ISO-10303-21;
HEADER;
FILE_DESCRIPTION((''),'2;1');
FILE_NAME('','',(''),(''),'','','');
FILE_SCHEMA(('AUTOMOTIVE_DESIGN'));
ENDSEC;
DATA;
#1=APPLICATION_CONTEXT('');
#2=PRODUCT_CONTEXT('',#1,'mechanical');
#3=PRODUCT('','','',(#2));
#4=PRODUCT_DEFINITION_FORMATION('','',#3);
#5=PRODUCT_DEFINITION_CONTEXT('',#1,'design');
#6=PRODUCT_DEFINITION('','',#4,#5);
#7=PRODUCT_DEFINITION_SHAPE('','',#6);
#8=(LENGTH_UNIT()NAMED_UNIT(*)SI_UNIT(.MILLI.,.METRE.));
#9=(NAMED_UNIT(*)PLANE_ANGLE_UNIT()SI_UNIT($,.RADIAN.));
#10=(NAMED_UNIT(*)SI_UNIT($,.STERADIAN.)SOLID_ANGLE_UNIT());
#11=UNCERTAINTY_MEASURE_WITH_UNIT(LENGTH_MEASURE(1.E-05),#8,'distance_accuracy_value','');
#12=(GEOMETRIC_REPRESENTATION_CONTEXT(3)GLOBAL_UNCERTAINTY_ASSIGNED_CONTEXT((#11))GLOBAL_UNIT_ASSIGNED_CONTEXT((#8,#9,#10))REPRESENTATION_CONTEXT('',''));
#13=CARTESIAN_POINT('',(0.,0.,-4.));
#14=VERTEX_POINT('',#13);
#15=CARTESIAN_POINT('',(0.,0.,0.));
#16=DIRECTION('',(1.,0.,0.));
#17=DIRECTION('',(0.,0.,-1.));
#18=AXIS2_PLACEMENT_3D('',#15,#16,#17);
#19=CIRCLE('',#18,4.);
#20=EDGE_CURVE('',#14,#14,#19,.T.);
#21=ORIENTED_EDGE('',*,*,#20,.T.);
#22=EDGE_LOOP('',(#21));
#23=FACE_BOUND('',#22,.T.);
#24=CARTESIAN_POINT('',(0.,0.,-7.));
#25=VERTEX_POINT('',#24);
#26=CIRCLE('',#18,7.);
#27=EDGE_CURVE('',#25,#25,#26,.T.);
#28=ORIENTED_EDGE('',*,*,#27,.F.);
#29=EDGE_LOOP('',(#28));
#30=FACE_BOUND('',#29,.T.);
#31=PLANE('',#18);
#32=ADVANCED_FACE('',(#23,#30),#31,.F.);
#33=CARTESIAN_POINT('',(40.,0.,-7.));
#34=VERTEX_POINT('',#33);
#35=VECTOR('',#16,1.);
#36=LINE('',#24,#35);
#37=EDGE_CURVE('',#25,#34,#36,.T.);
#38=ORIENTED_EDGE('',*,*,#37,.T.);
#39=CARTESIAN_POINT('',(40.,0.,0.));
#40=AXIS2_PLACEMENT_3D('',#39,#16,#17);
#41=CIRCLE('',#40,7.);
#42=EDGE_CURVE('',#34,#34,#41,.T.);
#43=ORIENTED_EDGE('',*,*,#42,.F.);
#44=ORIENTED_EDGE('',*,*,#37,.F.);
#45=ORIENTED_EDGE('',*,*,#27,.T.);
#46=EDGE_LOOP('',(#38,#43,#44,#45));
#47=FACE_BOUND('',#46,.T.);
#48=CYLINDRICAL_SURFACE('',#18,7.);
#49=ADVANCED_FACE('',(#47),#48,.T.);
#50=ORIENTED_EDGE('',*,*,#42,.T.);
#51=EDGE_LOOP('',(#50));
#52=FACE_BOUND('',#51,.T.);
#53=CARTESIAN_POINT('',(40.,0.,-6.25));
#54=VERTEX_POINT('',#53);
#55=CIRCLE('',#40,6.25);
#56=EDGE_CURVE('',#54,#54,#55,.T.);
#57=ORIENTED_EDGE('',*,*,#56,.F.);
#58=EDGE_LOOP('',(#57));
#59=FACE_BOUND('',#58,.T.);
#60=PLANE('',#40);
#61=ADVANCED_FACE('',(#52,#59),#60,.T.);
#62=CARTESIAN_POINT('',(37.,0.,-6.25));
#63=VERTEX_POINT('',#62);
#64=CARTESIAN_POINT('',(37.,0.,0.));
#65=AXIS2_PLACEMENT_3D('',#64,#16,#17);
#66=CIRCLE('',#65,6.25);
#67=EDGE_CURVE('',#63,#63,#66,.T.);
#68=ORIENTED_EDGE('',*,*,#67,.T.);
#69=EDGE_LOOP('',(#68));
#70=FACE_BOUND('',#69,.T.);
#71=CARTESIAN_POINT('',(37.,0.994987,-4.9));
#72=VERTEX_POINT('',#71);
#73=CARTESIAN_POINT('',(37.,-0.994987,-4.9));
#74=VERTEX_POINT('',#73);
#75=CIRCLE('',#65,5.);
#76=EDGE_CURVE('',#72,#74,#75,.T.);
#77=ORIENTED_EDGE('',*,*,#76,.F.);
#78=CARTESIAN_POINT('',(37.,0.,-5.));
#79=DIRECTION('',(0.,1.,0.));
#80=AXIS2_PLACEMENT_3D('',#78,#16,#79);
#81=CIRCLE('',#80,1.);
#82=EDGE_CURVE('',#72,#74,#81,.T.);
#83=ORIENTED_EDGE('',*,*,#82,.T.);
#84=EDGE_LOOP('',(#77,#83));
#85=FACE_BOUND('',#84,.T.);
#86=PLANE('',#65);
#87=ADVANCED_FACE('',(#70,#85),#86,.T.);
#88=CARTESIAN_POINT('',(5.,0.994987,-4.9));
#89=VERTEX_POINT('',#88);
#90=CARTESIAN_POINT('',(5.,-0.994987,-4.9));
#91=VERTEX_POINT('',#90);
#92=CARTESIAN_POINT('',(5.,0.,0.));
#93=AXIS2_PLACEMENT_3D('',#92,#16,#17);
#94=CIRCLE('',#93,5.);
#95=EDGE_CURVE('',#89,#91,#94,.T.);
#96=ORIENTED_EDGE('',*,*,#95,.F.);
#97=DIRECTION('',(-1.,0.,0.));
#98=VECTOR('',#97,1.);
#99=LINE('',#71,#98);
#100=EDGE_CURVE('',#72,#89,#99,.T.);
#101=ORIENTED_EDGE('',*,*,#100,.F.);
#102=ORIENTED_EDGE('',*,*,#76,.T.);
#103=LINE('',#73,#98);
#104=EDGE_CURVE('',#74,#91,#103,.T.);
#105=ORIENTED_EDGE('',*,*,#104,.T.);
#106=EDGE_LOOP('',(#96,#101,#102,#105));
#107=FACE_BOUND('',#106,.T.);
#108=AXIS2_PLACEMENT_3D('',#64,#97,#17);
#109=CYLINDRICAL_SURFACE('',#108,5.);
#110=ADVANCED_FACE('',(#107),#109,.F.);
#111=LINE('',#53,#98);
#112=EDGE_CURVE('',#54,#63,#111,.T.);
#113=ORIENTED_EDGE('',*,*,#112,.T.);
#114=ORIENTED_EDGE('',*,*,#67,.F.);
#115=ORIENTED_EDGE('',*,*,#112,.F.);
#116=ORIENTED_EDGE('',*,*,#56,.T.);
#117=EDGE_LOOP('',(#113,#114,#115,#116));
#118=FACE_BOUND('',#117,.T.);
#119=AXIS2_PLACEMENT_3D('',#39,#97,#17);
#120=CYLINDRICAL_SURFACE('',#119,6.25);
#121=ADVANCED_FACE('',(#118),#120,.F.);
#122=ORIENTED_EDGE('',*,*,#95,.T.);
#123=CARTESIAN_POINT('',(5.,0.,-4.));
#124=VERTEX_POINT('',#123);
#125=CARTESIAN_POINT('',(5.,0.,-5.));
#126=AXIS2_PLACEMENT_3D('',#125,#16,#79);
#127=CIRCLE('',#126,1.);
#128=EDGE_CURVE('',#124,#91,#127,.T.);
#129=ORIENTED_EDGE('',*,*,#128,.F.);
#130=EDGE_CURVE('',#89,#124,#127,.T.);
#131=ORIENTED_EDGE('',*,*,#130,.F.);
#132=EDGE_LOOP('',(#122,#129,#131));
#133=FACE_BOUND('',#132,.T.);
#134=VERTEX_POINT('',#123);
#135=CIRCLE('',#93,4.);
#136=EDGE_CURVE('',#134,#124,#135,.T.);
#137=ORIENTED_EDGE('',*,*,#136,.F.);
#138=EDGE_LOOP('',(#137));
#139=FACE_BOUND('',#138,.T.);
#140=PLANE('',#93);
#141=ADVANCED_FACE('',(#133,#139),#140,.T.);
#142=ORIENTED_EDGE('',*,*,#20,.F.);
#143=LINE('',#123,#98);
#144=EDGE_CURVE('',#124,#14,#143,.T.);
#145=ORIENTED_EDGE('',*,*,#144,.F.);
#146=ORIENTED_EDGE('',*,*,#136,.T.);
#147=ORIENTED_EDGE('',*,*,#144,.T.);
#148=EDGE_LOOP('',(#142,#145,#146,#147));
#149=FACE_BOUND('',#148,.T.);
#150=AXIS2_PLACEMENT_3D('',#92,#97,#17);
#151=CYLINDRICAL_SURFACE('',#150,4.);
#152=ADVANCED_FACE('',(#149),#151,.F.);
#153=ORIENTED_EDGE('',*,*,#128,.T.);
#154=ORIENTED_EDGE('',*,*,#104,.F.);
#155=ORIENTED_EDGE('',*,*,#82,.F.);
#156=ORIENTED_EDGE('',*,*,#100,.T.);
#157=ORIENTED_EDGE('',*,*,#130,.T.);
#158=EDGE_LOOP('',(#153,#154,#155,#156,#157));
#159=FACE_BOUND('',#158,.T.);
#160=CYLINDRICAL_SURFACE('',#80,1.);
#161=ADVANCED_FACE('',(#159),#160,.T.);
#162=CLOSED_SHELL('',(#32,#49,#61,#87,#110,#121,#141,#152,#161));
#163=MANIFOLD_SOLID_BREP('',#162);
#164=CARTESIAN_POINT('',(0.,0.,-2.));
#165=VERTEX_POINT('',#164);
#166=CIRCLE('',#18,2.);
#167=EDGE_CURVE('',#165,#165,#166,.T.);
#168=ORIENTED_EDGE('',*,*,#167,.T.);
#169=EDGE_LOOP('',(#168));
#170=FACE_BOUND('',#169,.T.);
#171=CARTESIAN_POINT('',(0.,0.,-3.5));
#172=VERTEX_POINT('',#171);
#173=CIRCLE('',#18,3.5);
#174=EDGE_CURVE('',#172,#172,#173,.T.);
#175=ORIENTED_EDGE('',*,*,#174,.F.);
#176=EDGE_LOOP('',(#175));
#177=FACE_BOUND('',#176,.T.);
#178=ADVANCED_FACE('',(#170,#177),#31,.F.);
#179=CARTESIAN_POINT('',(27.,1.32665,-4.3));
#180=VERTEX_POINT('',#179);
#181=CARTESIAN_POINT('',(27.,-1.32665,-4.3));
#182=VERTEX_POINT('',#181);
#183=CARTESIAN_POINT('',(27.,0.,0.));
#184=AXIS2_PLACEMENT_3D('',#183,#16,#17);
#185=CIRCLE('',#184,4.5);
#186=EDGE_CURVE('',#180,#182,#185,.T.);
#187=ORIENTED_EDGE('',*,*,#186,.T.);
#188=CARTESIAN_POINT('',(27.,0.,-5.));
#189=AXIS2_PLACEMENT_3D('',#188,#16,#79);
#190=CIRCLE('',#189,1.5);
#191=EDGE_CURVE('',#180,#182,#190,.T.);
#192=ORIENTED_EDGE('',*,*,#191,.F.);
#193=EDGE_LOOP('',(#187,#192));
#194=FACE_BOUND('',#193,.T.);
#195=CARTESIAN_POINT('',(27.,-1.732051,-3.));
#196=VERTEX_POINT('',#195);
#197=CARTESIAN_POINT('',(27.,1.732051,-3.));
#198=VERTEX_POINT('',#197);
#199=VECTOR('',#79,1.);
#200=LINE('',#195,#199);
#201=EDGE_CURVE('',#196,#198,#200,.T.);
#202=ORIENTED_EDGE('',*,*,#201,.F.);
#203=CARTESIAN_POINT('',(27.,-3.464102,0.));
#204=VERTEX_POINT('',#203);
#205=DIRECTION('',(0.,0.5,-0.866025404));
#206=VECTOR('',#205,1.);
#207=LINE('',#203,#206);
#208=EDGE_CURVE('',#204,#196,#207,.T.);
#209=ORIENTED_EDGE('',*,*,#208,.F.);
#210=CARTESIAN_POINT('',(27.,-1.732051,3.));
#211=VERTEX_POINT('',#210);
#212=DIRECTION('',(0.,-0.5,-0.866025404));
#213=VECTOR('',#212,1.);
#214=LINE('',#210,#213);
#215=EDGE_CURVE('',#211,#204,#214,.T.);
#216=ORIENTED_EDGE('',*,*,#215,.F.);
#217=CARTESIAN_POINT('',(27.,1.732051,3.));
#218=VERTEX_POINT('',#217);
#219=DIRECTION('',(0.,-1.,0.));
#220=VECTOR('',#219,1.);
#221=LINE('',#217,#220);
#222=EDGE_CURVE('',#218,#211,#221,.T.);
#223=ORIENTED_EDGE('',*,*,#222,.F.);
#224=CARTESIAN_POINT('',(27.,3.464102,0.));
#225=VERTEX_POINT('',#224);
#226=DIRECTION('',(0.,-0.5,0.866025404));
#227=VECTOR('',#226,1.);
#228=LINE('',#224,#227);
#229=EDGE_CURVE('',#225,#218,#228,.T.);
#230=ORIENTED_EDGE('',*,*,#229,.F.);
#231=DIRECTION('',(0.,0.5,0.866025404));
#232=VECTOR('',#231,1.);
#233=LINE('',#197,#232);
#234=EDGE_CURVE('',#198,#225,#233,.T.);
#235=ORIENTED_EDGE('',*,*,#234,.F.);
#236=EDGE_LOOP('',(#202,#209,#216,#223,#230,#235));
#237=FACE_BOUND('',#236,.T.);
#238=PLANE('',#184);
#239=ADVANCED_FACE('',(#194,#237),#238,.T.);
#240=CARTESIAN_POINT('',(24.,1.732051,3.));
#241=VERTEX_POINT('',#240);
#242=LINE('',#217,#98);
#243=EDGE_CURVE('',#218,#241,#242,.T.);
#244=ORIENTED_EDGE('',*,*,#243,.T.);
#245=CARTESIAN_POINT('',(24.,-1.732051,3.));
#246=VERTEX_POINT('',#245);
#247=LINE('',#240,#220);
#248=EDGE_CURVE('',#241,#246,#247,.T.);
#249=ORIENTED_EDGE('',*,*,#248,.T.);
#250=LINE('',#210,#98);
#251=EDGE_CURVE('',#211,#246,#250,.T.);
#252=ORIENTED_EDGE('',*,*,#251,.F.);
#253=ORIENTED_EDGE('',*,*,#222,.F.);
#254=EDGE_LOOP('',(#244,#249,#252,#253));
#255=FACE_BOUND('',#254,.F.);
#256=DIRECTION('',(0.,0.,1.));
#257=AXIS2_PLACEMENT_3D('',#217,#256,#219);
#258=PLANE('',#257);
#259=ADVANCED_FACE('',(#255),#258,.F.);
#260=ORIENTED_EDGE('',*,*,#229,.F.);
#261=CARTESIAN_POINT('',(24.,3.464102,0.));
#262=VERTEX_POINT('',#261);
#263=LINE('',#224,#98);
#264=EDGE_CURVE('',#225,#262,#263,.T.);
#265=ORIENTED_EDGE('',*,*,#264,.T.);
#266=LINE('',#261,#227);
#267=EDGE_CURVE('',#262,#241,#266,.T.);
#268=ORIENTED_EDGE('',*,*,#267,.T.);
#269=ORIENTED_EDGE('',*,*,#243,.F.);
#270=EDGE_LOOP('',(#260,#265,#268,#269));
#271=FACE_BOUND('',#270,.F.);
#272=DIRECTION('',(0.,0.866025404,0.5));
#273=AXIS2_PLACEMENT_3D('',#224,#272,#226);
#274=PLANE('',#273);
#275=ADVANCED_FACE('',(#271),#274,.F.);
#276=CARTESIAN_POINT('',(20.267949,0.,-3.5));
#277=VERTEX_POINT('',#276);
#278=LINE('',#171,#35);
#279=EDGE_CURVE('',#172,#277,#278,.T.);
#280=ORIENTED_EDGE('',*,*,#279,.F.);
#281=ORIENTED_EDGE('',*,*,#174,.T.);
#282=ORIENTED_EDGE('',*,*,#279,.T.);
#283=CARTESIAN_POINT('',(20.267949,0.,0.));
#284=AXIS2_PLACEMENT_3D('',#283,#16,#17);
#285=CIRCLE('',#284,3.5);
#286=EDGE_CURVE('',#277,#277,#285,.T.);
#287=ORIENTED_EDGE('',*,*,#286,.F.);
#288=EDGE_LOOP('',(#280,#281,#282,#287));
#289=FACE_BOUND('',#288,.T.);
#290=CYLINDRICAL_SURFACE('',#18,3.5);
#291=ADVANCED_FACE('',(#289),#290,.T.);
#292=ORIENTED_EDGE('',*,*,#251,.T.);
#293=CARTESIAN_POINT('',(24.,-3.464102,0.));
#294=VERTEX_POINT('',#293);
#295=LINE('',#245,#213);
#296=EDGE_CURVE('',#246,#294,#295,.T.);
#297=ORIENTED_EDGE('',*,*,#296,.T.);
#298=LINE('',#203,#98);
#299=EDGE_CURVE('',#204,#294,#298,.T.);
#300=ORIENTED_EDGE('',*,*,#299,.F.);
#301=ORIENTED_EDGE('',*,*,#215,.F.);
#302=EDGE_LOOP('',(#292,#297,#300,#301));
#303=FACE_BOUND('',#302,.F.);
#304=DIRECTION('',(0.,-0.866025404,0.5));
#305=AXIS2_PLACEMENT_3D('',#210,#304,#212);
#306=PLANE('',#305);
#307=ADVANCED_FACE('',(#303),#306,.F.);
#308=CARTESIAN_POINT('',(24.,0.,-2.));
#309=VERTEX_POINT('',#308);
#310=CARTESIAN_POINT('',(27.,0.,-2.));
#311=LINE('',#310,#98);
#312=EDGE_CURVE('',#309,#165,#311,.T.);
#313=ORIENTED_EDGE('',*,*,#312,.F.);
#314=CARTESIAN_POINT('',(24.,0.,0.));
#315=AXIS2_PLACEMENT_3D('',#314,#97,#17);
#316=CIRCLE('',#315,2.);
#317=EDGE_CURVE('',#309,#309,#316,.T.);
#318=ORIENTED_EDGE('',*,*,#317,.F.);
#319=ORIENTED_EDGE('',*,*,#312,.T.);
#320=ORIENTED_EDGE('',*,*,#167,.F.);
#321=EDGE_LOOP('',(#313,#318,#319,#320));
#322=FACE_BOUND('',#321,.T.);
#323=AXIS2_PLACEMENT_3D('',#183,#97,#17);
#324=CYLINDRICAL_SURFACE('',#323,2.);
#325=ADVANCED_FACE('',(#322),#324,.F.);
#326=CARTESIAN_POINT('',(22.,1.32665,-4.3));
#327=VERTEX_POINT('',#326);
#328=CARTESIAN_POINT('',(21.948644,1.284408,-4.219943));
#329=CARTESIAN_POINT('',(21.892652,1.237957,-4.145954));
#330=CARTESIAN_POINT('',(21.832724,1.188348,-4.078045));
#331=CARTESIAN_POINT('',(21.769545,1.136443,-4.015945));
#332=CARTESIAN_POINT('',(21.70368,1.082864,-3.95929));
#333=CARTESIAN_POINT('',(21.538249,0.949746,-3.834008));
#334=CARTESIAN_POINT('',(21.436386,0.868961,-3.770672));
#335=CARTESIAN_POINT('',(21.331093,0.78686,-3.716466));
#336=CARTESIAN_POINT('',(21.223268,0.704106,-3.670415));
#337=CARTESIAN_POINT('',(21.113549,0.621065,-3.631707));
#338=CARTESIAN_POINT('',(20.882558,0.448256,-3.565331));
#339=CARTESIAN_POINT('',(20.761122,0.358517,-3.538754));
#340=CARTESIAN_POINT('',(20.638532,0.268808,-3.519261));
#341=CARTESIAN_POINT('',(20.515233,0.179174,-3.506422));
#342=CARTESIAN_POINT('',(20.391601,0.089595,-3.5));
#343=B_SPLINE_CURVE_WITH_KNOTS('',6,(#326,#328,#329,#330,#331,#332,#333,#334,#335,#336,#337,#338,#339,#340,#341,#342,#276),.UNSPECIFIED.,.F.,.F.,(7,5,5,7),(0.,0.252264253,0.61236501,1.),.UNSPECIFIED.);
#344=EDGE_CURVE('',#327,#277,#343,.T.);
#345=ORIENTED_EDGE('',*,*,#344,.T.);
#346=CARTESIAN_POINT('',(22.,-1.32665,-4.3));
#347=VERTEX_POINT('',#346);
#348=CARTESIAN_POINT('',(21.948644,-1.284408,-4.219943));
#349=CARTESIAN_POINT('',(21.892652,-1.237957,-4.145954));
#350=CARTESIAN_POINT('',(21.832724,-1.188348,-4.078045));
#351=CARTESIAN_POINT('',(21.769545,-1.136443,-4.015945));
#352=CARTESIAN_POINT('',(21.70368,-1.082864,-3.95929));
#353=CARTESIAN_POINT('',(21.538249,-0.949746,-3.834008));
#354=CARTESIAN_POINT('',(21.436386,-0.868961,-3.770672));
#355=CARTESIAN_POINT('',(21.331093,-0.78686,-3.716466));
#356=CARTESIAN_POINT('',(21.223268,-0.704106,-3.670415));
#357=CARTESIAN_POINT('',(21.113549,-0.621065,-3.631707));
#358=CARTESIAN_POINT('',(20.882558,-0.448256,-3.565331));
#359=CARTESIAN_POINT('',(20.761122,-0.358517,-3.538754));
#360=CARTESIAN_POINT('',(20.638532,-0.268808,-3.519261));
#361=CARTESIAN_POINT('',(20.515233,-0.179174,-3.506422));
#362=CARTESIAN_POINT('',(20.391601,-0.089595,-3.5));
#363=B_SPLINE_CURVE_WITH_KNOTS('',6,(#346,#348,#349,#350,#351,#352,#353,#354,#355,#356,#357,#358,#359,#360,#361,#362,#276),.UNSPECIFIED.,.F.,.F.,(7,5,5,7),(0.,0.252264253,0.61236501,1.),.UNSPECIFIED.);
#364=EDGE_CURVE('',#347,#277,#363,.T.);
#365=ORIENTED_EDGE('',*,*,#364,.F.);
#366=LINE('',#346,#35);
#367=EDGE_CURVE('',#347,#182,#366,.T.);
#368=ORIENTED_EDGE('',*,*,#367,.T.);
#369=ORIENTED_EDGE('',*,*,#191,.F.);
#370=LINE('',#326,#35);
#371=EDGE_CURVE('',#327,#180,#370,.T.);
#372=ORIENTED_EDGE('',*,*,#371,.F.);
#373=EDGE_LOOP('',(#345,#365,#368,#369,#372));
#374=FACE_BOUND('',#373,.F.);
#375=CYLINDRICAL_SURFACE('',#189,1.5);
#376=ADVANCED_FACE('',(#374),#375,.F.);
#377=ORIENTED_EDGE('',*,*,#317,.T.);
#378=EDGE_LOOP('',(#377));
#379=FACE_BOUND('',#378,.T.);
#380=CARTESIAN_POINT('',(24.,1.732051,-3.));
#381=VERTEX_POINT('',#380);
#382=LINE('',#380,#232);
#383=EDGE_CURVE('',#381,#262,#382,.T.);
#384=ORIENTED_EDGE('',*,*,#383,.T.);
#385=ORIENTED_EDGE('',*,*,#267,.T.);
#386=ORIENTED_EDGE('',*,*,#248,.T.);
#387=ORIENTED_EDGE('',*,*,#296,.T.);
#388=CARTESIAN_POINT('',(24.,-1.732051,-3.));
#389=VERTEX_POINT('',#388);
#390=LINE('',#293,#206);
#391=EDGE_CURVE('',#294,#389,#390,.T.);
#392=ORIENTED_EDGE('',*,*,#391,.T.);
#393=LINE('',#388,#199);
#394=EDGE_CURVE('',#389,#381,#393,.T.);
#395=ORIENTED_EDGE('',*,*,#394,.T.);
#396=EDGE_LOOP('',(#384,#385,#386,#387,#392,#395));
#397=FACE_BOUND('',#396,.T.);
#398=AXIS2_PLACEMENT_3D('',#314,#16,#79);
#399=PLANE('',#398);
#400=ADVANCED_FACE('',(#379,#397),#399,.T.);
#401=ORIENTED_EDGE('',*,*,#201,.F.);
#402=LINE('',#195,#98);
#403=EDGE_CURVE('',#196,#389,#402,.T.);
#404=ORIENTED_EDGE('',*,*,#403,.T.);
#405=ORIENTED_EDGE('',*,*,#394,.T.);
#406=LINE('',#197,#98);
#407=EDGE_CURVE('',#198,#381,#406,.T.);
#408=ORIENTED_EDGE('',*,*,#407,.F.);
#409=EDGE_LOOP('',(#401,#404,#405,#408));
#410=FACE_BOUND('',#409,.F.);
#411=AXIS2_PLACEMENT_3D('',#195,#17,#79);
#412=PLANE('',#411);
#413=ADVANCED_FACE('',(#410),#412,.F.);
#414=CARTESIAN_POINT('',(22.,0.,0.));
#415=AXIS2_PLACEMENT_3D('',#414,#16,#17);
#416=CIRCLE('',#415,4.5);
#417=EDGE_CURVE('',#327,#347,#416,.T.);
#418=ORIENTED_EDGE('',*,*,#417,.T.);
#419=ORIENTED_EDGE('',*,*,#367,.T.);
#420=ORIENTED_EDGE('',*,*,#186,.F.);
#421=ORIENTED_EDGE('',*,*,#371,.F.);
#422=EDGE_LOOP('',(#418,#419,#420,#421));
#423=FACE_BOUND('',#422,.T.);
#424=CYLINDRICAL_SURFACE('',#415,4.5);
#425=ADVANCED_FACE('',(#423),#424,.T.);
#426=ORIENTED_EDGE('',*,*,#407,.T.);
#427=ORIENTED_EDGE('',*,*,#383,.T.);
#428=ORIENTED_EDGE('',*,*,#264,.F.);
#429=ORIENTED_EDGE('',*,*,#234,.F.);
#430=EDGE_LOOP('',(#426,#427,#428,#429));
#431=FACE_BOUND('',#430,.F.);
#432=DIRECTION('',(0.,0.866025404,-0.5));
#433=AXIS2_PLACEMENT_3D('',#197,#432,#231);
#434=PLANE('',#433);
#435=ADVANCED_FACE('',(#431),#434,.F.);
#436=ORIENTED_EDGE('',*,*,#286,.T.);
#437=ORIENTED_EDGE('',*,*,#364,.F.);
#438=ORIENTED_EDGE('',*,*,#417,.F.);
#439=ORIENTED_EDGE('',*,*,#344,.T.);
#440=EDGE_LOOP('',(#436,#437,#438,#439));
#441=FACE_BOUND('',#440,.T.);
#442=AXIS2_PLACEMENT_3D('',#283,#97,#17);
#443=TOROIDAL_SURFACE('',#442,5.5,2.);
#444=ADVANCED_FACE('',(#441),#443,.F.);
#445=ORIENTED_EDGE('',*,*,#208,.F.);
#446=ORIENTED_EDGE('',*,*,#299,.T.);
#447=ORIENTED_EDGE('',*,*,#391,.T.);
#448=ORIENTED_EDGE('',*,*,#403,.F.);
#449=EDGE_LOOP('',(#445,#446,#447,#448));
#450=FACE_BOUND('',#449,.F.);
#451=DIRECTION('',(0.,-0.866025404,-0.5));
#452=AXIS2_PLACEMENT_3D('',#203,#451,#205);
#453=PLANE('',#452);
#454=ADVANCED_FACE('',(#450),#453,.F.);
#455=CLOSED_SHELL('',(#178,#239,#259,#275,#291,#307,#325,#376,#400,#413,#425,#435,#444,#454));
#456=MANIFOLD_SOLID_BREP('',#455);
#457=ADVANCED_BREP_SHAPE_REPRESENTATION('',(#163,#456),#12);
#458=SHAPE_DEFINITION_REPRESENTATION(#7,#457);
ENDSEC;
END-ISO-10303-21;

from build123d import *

# Parameters (mm, degrees)
F2_R     = 1
F3_DEPTH = 37
F5_R     = 1.5
F6_DEPTH = 27.001
F8_DEPTH = 3


# Not quite as in the source:
# - a fillet or chamfer that OpenCascade refuses, or shapes differently, is made with other operations: its cross-section is extruded or revolved along the edge and cut away or added


with BuildPart() as f1:
    # F0 (on Front) → F1 (revolve)
    with BuildSketch(Plane.XZ):
        Polygon((0, -7), (40, -7), (40, -6.25), (37, -6.25), (37, -5), (5, -5), (5, -4), (0, -4), align=None)
    revolve(axis=Axis((17.6803227514, 0, 0), (1, 0, 0)))

    # F2 (on face) → F3 (join, through all)
    with BuildSketch(Plane.YZ.offset(37)):
        with Locations((0, -5)):
            Circle(F2_R)
    extrude(amount=-F3_DEPTH)


with BuildPart() as f1b:
    # F0 (on Front) → F1, piece 2 (revolve)
    with BuildSketch(Plane.XZ):
        Polygon((0, -2), (0, -3.5), (22, -3.5), (22, -4.5), (27, -4.5), (27, -2), align=None)
    revolve(axis=Axis((17.6803227514, 0, 0), (1, 0, 0)))

    # F4: fillet of radius 2 on 1 edges, made by hand

    # F4_s1 → F4_t2 (revolve)
    with BuildSketch(Plane.XZ):
        with BuildLine():
            ThreePointArc((20.2679491924, -3.5), (21.2679491924, -3.7679491924), (22, -4.5))
            Line((22, -4.5), (22, -3.5))
            Line((22, -3.5), (20.2679491924, -3.5))
        make_face()
    revolve(axis=Axis((22, 0, 0), (1, 0, 0)))

    # F5 (on face) → F6 (cut, through all)
    with BuildSketch(Plane.YZ.offset(27)):
        with Locations((0, -5)):
            Circle(F5_R)
    extrude(amount=-F6_DEPTH, mode=Mode.SUBTRACT)

    # F7 (on face) → F8 (cut)
    with BuildSketch(Plane.YZ.offset(27)):
        Polygon((1.7320508076, 3), (-1.7320508076, 3), (-3.4641016151, 0), (-1.7320508076, -3), (1.7320508076, -3), (3.4641016151, 0), align=None)
    extrude(amount=-F8_DEPTH, mode=Mode.SUBTRACT)


solid = Compound([f1.part, f1b.part])
